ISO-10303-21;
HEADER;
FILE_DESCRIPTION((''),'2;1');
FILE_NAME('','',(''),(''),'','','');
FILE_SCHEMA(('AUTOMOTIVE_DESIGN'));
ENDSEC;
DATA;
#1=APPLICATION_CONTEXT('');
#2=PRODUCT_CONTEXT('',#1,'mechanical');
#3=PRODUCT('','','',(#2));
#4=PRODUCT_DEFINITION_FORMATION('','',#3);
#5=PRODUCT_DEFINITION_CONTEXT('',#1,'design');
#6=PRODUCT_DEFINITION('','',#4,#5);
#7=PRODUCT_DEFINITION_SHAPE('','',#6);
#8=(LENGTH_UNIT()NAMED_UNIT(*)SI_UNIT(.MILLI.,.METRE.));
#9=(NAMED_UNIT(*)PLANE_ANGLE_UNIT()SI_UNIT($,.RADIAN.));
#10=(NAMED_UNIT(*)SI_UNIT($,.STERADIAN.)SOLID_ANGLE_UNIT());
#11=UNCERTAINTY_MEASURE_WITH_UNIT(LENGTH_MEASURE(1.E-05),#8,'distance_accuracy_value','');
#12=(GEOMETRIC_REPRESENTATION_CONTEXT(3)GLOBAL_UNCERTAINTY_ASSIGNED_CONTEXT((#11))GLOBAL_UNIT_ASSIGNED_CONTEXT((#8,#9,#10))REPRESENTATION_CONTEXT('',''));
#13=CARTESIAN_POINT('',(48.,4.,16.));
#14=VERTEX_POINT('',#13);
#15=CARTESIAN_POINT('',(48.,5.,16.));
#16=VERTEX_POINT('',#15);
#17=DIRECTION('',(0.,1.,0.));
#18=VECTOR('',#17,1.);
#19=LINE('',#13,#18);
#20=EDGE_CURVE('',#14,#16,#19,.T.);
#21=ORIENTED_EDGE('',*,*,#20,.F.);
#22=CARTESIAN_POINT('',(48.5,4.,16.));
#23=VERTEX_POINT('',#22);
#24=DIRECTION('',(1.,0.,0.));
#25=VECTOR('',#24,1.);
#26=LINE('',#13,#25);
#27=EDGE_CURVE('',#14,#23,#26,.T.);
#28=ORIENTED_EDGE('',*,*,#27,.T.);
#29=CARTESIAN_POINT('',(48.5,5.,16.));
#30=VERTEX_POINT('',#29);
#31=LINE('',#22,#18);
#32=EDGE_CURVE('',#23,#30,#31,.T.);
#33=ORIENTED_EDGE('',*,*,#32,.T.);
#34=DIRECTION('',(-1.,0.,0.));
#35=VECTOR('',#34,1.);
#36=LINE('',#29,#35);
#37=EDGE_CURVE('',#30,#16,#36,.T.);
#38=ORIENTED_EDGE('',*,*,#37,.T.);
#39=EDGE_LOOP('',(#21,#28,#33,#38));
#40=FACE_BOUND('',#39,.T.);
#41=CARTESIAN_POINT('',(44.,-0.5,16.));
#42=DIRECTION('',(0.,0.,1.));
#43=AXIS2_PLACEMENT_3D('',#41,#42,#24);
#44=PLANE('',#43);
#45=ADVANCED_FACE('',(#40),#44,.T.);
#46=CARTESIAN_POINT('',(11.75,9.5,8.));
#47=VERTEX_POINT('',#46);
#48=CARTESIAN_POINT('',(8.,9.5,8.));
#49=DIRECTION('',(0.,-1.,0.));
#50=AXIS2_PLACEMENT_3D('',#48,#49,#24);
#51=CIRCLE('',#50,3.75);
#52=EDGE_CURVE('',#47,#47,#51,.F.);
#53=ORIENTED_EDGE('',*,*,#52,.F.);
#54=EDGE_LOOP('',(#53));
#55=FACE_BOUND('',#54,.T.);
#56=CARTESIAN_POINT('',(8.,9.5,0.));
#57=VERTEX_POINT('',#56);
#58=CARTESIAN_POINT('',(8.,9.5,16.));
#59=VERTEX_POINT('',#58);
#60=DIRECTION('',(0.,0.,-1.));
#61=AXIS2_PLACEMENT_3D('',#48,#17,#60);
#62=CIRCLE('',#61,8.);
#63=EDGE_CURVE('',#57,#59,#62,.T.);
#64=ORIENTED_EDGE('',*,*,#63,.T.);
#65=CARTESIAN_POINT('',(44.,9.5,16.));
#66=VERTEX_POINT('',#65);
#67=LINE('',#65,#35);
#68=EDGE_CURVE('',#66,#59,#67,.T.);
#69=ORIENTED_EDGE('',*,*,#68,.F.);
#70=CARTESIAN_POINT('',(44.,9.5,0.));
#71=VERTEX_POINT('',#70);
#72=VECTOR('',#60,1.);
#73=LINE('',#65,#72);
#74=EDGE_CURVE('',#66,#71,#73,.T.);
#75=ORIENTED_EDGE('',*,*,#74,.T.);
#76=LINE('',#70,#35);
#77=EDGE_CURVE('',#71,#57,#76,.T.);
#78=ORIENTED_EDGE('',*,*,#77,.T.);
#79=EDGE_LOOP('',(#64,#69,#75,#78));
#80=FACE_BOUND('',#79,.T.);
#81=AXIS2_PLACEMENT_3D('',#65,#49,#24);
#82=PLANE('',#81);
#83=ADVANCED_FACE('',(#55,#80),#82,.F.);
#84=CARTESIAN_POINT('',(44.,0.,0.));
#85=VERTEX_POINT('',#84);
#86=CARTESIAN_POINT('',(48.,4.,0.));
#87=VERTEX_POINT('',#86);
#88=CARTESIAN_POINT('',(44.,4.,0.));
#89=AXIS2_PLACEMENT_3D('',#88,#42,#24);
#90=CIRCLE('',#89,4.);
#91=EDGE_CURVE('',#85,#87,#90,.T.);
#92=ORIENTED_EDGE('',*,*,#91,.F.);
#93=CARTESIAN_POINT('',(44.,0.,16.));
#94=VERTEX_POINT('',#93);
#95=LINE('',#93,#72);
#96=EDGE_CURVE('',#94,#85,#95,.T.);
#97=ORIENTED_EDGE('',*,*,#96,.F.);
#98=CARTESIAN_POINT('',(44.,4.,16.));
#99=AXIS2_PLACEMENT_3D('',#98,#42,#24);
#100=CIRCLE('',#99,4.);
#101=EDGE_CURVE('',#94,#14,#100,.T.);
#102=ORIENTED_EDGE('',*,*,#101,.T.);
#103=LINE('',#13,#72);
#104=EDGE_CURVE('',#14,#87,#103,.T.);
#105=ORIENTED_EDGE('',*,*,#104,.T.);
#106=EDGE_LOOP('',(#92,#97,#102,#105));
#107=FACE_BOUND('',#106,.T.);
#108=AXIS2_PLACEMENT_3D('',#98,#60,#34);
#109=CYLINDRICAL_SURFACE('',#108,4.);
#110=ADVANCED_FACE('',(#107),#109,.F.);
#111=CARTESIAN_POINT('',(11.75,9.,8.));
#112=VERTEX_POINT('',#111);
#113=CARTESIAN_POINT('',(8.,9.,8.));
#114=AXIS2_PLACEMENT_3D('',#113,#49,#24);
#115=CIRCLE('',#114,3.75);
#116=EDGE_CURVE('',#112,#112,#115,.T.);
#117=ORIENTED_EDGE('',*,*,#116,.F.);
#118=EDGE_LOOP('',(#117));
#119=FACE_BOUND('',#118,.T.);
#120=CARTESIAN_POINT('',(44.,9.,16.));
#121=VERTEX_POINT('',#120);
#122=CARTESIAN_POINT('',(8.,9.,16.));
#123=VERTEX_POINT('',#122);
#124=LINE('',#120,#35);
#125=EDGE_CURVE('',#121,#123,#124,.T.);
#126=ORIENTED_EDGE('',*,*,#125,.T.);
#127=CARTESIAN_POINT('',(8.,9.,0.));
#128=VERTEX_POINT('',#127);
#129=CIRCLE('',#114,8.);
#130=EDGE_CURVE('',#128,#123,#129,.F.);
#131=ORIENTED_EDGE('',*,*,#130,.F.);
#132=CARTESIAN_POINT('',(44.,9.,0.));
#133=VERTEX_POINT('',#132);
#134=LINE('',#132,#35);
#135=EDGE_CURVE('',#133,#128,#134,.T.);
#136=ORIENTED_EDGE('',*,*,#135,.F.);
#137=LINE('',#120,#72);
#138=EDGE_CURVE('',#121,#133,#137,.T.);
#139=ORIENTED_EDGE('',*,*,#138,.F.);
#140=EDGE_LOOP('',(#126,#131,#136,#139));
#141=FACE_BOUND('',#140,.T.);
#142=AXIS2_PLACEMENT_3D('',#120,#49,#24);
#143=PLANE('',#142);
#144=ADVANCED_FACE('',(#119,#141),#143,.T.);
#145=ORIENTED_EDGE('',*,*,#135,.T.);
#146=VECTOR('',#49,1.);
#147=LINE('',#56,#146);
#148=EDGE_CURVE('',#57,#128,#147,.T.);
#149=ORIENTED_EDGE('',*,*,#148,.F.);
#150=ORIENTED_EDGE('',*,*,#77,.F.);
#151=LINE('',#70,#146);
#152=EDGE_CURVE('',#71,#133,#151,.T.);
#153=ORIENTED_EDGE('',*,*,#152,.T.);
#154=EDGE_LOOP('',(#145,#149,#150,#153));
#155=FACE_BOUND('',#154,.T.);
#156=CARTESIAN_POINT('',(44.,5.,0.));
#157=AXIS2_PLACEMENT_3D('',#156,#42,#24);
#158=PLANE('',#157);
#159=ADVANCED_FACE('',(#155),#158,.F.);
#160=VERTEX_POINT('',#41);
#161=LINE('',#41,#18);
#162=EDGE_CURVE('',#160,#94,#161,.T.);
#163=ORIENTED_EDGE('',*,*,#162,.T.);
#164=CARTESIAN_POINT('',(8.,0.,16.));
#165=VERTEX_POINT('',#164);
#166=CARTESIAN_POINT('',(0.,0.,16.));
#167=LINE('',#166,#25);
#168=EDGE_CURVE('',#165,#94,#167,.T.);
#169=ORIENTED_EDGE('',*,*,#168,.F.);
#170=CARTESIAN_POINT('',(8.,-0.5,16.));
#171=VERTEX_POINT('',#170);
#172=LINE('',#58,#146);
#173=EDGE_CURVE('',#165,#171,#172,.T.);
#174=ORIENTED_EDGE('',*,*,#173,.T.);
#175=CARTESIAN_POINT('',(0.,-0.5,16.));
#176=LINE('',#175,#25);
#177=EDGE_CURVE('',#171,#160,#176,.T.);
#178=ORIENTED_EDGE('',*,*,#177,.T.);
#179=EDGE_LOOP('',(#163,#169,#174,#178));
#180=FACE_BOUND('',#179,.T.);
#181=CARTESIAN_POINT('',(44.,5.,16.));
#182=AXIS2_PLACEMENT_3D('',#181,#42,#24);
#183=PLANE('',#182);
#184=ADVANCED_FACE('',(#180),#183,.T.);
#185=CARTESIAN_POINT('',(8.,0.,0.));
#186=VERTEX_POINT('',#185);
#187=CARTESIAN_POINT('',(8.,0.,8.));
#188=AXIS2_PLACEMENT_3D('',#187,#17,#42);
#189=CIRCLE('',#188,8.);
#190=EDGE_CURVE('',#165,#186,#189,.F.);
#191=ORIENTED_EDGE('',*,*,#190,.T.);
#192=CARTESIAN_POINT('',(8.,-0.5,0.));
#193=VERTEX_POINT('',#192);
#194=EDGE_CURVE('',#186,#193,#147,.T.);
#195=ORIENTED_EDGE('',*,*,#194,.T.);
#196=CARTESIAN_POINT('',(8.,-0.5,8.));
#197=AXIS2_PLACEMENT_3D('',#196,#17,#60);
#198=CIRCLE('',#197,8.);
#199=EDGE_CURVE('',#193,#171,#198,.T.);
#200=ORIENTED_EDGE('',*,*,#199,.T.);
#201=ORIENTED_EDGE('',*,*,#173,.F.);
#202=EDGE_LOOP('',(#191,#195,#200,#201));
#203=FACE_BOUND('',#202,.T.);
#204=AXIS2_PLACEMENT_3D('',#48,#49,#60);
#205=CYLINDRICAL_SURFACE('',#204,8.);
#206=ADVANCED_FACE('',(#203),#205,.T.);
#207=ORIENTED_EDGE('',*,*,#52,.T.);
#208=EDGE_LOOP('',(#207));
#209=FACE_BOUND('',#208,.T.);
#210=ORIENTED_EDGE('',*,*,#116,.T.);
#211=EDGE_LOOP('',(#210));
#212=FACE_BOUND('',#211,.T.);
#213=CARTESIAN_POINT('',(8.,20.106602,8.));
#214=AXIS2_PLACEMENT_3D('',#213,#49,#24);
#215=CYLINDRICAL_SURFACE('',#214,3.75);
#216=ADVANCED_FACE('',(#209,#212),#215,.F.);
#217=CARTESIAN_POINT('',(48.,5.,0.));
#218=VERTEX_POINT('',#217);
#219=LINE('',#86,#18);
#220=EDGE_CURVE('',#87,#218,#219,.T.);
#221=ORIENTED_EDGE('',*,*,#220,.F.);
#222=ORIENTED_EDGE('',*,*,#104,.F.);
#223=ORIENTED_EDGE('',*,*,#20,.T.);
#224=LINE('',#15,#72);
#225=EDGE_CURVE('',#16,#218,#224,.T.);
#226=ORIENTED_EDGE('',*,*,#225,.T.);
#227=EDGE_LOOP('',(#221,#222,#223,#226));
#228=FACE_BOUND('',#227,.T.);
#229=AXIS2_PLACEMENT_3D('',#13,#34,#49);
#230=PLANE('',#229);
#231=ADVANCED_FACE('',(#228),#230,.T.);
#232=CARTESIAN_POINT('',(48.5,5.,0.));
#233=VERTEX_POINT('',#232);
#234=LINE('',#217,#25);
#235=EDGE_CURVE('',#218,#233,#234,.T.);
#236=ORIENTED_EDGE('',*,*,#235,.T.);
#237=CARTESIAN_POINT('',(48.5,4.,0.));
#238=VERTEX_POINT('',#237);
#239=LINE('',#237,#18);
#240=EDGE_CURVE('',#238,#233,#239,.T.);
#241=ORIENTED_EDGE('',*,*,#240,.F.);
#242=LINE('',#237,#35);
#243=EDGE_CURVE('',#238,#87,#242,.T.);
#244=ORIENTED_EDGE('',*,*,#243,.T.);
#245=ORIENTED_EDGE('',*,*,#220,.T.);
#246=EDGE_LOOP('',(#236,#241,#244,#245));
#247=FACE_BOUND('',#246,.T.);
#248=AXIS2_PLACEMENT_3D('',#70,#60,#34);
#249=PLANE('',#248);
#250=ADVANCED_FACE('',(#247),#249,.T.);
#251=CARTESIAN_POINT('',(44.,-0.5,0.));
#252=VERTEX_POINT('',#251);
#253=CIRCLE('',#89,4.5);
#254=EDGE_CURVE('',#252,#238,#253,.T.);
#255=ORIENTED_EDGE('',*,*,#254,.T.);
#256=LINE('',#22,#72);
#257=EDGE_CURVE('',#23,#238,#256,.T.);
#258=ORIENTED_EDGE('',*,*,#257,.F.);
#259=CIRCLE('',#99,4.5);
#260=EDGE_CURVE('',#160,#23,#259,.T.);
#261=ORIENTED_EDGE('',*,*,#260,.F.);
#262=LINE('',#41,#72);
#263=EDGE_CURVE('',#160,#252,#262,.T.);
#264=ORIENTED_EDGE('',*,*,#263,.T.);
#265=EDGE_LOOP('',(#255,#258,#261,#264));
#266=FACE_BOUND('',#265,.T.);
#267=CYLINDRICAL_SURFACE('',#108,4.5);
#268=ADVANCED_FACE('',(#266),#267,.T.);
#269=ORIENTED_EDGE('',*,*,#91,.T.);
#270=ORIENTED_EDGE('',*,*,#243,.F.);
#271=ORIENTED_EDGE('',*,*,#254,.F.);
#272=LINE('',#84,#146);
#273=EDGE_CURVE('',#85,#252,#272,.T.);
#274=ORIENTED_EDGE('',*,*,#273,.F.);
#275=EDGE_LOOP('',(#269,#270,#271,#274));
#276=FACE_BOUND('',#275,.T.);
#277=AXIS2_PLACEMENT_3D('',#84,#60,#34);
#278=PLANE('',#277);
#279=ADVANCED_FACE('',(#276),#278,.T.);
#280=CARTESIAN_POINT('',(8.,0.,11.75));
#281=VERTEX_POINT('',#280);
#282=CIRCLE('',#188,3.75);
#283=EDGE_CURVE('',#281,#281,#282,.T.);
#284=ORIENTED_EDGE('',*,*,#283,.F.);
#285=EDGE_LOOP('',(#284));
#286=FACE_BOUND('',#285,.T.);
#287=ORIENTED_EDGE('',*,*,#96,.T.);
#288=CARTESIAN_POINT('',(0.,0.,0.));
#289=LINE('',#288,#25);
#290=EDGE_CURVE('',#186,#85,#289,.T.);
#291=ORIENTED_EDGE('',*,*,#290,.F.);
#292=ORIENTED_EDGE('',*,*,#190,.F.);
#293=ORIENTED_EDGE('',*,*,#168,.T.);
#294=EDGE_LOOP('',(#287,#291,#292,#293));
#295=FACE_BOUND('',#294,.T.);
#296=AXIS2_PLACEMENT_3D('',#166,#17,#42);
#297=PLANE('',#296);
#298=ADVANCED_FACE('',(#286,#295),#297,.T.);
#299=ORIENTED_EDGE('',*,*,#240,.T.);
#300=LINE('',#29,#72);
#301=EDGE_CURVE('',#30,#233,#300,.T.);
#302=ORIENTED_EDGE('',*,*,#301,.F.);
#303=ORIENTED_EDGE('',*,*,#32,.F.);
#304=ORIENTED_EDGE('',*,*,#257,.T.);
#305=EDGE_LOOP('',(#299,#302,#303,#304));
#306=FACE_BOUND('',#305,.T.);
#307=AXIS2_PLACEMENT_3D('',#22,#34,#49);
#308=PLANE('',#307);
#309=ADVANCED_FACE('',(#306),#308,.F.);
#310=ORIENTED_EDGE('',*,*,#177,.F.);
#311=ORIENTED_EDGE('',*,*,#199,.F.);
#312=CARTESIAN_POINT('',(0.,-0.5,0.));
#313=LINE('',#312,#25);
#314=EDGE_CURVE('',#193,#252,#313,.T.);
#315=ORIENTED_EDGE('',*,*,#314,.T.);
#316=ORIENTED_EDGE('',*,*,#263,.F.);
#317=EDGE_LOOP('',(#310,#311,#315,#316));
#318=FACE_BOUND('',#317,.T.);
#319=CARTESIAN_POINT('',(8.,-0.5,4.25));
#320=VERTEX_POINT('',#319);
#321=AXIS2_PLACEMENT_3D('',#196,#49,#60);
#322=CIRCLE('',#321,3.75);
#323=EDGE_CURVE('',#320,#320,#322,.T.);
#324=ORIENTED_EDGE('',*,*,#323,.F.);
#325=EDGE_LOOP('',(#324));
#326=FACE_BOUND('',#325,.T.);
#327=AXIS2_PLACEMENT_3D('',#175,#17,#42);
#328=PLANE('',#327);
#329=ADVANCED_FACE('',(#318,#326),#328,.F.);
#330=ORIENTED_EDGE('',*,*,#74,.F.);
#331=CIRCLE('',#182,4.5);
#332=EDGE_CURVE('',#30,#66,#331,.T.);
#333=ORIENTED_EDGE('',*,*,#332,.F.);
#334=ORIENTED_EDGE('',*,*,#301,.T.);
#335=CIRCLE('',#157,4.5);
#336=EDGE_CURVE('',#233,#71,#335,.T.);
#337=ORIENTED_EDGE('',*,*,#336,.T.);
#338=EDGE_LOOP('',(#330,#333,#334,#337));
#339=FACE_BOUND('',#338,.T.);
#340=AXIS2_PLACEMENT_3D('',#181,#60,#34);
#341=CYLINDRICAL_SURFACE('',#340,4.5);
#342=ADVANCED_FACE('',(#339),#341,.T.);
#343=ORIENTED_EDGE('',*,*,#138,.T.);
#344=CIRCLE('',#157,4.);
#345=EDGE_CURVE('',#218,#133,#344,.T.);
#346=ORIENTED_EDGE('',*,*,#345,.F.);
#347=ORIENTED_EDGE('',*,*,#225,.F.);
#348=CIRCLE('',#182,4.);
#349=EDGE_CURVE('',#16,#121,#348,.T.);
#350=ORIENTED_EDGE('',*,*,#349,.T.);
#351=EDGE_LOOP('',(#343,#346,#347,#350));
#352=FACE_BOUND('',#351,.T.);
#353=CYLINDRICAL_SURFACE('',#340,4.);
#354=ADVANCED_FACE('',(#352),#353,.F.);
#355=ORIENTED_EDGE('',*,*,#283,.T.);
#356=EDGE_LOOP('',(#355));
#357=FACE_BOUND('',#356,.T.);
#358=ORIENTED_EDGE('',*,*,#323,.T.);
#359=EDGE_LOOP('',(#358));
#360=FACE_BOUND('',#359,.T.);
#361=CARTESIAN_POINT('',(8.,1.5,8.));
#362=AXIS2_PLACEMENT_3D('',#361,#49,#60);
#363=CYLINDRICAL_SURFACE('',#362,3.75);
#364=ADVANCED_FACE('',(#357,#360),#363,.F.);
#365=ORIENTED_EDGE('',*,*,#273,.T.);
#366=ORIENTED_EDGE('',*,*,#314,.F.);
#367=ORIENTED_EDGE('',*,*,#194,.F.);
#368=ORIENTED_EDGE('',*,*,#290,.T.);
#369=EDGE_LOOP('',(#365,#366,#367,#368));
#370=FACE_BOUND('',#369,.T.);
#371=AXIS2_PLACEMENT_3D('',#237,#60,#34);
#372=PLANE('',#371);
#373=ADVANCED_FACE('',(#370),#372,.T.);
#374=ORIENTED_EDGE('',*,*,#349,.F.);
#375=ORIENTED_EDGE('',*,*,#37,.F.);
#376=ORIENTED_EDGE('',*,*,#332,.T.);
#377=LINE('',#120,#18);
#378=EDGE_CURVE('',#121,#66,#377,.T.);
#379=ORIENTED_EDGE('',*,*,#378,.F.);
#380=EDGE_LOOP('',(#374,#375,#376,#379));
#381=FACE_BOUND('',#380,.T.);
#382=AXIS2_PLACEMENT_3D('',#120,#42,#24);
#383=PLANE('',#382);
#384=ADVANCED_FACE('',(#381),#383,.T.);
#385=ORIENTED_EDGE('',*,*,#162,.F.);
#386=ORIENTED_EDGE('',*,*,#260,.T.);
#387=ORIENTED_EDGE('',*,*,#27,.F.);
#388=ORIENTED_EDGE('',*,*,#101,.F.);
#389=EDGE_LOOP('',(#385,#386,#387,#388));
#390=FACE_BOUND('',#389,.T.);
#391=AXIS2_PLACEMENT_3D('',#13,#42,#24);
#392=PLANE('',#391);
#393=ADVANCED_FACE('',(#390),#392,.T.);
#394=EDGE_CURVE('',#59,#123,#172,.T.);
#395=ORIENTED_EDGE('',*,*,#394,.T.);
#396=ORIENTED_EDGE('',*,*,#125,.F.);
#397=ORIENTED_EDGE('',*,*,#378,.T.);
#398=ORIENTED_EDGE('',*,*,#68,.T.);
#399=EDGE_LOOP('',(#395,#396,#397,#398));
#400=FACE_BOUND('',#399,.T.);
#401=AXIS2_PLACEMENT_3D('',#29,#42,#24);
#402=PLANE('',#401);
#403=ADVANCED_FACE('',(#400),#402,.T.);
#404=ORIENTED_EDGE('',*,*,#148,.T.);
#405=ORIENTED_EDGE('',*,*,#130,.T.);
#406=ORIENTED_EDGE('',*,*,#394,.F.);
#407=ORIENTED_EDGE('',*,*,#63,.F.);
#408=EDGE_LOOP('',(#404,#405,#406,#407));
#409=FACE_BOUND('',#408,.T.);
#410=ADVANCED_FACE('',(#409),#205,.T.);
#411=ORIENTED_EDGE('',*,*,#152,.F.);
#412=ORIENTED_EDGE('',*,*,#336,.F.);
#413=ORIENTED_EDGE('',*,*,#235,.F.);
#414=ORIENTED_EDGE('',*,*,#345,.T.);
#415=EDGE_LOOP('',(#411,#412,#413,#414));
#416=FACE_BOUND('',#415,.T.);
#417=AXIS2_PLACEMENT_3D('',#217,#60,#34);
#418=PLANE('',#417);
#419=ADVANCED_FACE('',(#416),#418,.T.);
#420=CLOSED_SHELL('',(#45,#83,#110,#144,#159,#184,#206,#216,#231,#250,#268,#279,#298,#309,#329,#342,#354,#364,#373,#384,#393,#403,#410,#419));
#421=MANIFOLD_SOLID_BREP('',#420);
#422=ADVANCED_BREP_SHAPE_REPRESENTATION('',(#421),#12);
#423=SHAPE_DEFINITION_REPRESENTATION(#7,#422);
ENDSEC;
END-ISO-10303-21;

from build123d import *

# Parameters (mm, degrees)
BASE_FLANGE1_DEPTH  = 16
CUT_EXTRUDE1_DEPTH  = 53.04084934
SKETCH7_R           = 3.75
BOSS_EXTRUDE1_DEPTH = 2
CUT_EXTRUDE2_START  = -2
SKETCH8_R           = 3.75
CUT_EXTRUDE2_DEPTH  = 2
BOSS_EXTRUDE2_START = -2
SKETCH9_R           = 3.75
BOSS_EXTRUDE2_DEPTH = 2
CUT_EXTRUDE4_START  = -2
SKETCH10_R          = 3.75
CUT_EXTRUDE4_DEPTH  = 2


# Sheet-metal steps are written as plain solids
with BuildPart() as part:
    # Sketch1 → Base-Flange1 (new body)
    with BuildSketch(Plane.XY):
        with BuildLine():
            Line((0, 0), (44, 0))
            ThreePointArc((44, 0), (46.828427125, 1.171572875), (48, 4))
            Line((48, 4), (48, 5))
            ThreePointArc((48, 5), (46.828427125, 7.828427125), (44, 9))
            Line((44, 9), (0, 9))
            Line((0, 9), (0, 9.5))
            Line((0, 9.5), (44, 9.5))
            ThreePointArc((44, 9.5), (47.181980515, 8.181980515), (48.5, 5))
            Line((48.5, 5), (48.5, 4))
            ThreePointArc((48.5, 4), (47.181980515, 0.818019485), (44, -0.5))
            Line((44, -0.5), (0, -0.5))
            Line((0, -0.5), (0, 0))
        make_face()
    extrude(amount=BASE_FLANGE1_DEPTH)

    # Sketch6 → Cut-Extrude1 (cut, through all)
    with BuildSketch(Plane.XZ.offset(0.5)):
        with BuildLine():
            Line((8, 0), (8, -3.97427409))
            Line((8, -3.97427409), (-3.94829055, -3.97427409))
            Line((-3.94829055, -3.97427409), (-3.94829055, 19.074328647))
            Line((-3.94829055, 19.074328647), (8, 19.074328647))
            Line((8, 19.074328647), (8, 16))
            ThreePointArc((8, 16), (0, 8), (8, 0))
        make_face()
    extrude(amount=-CUT_EXTRUDE1_DEPTH, mode=Mode.SUBTRACT)

    # Sketch7 → Boss-Extrude1 (add)
    with BuildSketch(Plane(origin=(0, 9.5, 0), x_dir=(1, 0, 0), z_dir=(0, 1, 0))):
        with Locations(Location((8, -8, 0), (0, 0, 180))):
            Circle(SKETCH7_R)
    extrude(amount=-BOSS_EXTRUDE1_DEPTH)

    # Sketch8 → Cut-Extrude2 (cut)
    with BuildSketch(Plane.XZ.offset(-7.5).offset(CUT_EXTRUDE2_START)):
        with Locations((8, 8)):
            Circle(SKETCH8_R)
    extrude(amount=CUT_EXTRUDE2_DEPTH, mode=Mode.SUBTRACT)

    # Sketch9 → Boss-Extrude2 (add)
    with BuildSketch(Plane.XZ.offset(0.5).offset(BOSS_EXTRUDE2_START)):
        with Locations((8, 8)):
            Circle(SKETCH9_R)
    extrude(amount=BOSS_EXTRUDE2_DEPTH)

    # Sketch10 → Cut-Extrude4 (cut)
    with BuildSketch(Plane.XZ.offset(0.5).offset(CUT_EXTRUDE4_START)):
        with Locations((8, 8)):
            Circle(SKETCH10_R)
    extrude(amount=CUT_EXTRUDE4_DEPTH, mode=Mode.SUBTRACT)


solid = part.part
